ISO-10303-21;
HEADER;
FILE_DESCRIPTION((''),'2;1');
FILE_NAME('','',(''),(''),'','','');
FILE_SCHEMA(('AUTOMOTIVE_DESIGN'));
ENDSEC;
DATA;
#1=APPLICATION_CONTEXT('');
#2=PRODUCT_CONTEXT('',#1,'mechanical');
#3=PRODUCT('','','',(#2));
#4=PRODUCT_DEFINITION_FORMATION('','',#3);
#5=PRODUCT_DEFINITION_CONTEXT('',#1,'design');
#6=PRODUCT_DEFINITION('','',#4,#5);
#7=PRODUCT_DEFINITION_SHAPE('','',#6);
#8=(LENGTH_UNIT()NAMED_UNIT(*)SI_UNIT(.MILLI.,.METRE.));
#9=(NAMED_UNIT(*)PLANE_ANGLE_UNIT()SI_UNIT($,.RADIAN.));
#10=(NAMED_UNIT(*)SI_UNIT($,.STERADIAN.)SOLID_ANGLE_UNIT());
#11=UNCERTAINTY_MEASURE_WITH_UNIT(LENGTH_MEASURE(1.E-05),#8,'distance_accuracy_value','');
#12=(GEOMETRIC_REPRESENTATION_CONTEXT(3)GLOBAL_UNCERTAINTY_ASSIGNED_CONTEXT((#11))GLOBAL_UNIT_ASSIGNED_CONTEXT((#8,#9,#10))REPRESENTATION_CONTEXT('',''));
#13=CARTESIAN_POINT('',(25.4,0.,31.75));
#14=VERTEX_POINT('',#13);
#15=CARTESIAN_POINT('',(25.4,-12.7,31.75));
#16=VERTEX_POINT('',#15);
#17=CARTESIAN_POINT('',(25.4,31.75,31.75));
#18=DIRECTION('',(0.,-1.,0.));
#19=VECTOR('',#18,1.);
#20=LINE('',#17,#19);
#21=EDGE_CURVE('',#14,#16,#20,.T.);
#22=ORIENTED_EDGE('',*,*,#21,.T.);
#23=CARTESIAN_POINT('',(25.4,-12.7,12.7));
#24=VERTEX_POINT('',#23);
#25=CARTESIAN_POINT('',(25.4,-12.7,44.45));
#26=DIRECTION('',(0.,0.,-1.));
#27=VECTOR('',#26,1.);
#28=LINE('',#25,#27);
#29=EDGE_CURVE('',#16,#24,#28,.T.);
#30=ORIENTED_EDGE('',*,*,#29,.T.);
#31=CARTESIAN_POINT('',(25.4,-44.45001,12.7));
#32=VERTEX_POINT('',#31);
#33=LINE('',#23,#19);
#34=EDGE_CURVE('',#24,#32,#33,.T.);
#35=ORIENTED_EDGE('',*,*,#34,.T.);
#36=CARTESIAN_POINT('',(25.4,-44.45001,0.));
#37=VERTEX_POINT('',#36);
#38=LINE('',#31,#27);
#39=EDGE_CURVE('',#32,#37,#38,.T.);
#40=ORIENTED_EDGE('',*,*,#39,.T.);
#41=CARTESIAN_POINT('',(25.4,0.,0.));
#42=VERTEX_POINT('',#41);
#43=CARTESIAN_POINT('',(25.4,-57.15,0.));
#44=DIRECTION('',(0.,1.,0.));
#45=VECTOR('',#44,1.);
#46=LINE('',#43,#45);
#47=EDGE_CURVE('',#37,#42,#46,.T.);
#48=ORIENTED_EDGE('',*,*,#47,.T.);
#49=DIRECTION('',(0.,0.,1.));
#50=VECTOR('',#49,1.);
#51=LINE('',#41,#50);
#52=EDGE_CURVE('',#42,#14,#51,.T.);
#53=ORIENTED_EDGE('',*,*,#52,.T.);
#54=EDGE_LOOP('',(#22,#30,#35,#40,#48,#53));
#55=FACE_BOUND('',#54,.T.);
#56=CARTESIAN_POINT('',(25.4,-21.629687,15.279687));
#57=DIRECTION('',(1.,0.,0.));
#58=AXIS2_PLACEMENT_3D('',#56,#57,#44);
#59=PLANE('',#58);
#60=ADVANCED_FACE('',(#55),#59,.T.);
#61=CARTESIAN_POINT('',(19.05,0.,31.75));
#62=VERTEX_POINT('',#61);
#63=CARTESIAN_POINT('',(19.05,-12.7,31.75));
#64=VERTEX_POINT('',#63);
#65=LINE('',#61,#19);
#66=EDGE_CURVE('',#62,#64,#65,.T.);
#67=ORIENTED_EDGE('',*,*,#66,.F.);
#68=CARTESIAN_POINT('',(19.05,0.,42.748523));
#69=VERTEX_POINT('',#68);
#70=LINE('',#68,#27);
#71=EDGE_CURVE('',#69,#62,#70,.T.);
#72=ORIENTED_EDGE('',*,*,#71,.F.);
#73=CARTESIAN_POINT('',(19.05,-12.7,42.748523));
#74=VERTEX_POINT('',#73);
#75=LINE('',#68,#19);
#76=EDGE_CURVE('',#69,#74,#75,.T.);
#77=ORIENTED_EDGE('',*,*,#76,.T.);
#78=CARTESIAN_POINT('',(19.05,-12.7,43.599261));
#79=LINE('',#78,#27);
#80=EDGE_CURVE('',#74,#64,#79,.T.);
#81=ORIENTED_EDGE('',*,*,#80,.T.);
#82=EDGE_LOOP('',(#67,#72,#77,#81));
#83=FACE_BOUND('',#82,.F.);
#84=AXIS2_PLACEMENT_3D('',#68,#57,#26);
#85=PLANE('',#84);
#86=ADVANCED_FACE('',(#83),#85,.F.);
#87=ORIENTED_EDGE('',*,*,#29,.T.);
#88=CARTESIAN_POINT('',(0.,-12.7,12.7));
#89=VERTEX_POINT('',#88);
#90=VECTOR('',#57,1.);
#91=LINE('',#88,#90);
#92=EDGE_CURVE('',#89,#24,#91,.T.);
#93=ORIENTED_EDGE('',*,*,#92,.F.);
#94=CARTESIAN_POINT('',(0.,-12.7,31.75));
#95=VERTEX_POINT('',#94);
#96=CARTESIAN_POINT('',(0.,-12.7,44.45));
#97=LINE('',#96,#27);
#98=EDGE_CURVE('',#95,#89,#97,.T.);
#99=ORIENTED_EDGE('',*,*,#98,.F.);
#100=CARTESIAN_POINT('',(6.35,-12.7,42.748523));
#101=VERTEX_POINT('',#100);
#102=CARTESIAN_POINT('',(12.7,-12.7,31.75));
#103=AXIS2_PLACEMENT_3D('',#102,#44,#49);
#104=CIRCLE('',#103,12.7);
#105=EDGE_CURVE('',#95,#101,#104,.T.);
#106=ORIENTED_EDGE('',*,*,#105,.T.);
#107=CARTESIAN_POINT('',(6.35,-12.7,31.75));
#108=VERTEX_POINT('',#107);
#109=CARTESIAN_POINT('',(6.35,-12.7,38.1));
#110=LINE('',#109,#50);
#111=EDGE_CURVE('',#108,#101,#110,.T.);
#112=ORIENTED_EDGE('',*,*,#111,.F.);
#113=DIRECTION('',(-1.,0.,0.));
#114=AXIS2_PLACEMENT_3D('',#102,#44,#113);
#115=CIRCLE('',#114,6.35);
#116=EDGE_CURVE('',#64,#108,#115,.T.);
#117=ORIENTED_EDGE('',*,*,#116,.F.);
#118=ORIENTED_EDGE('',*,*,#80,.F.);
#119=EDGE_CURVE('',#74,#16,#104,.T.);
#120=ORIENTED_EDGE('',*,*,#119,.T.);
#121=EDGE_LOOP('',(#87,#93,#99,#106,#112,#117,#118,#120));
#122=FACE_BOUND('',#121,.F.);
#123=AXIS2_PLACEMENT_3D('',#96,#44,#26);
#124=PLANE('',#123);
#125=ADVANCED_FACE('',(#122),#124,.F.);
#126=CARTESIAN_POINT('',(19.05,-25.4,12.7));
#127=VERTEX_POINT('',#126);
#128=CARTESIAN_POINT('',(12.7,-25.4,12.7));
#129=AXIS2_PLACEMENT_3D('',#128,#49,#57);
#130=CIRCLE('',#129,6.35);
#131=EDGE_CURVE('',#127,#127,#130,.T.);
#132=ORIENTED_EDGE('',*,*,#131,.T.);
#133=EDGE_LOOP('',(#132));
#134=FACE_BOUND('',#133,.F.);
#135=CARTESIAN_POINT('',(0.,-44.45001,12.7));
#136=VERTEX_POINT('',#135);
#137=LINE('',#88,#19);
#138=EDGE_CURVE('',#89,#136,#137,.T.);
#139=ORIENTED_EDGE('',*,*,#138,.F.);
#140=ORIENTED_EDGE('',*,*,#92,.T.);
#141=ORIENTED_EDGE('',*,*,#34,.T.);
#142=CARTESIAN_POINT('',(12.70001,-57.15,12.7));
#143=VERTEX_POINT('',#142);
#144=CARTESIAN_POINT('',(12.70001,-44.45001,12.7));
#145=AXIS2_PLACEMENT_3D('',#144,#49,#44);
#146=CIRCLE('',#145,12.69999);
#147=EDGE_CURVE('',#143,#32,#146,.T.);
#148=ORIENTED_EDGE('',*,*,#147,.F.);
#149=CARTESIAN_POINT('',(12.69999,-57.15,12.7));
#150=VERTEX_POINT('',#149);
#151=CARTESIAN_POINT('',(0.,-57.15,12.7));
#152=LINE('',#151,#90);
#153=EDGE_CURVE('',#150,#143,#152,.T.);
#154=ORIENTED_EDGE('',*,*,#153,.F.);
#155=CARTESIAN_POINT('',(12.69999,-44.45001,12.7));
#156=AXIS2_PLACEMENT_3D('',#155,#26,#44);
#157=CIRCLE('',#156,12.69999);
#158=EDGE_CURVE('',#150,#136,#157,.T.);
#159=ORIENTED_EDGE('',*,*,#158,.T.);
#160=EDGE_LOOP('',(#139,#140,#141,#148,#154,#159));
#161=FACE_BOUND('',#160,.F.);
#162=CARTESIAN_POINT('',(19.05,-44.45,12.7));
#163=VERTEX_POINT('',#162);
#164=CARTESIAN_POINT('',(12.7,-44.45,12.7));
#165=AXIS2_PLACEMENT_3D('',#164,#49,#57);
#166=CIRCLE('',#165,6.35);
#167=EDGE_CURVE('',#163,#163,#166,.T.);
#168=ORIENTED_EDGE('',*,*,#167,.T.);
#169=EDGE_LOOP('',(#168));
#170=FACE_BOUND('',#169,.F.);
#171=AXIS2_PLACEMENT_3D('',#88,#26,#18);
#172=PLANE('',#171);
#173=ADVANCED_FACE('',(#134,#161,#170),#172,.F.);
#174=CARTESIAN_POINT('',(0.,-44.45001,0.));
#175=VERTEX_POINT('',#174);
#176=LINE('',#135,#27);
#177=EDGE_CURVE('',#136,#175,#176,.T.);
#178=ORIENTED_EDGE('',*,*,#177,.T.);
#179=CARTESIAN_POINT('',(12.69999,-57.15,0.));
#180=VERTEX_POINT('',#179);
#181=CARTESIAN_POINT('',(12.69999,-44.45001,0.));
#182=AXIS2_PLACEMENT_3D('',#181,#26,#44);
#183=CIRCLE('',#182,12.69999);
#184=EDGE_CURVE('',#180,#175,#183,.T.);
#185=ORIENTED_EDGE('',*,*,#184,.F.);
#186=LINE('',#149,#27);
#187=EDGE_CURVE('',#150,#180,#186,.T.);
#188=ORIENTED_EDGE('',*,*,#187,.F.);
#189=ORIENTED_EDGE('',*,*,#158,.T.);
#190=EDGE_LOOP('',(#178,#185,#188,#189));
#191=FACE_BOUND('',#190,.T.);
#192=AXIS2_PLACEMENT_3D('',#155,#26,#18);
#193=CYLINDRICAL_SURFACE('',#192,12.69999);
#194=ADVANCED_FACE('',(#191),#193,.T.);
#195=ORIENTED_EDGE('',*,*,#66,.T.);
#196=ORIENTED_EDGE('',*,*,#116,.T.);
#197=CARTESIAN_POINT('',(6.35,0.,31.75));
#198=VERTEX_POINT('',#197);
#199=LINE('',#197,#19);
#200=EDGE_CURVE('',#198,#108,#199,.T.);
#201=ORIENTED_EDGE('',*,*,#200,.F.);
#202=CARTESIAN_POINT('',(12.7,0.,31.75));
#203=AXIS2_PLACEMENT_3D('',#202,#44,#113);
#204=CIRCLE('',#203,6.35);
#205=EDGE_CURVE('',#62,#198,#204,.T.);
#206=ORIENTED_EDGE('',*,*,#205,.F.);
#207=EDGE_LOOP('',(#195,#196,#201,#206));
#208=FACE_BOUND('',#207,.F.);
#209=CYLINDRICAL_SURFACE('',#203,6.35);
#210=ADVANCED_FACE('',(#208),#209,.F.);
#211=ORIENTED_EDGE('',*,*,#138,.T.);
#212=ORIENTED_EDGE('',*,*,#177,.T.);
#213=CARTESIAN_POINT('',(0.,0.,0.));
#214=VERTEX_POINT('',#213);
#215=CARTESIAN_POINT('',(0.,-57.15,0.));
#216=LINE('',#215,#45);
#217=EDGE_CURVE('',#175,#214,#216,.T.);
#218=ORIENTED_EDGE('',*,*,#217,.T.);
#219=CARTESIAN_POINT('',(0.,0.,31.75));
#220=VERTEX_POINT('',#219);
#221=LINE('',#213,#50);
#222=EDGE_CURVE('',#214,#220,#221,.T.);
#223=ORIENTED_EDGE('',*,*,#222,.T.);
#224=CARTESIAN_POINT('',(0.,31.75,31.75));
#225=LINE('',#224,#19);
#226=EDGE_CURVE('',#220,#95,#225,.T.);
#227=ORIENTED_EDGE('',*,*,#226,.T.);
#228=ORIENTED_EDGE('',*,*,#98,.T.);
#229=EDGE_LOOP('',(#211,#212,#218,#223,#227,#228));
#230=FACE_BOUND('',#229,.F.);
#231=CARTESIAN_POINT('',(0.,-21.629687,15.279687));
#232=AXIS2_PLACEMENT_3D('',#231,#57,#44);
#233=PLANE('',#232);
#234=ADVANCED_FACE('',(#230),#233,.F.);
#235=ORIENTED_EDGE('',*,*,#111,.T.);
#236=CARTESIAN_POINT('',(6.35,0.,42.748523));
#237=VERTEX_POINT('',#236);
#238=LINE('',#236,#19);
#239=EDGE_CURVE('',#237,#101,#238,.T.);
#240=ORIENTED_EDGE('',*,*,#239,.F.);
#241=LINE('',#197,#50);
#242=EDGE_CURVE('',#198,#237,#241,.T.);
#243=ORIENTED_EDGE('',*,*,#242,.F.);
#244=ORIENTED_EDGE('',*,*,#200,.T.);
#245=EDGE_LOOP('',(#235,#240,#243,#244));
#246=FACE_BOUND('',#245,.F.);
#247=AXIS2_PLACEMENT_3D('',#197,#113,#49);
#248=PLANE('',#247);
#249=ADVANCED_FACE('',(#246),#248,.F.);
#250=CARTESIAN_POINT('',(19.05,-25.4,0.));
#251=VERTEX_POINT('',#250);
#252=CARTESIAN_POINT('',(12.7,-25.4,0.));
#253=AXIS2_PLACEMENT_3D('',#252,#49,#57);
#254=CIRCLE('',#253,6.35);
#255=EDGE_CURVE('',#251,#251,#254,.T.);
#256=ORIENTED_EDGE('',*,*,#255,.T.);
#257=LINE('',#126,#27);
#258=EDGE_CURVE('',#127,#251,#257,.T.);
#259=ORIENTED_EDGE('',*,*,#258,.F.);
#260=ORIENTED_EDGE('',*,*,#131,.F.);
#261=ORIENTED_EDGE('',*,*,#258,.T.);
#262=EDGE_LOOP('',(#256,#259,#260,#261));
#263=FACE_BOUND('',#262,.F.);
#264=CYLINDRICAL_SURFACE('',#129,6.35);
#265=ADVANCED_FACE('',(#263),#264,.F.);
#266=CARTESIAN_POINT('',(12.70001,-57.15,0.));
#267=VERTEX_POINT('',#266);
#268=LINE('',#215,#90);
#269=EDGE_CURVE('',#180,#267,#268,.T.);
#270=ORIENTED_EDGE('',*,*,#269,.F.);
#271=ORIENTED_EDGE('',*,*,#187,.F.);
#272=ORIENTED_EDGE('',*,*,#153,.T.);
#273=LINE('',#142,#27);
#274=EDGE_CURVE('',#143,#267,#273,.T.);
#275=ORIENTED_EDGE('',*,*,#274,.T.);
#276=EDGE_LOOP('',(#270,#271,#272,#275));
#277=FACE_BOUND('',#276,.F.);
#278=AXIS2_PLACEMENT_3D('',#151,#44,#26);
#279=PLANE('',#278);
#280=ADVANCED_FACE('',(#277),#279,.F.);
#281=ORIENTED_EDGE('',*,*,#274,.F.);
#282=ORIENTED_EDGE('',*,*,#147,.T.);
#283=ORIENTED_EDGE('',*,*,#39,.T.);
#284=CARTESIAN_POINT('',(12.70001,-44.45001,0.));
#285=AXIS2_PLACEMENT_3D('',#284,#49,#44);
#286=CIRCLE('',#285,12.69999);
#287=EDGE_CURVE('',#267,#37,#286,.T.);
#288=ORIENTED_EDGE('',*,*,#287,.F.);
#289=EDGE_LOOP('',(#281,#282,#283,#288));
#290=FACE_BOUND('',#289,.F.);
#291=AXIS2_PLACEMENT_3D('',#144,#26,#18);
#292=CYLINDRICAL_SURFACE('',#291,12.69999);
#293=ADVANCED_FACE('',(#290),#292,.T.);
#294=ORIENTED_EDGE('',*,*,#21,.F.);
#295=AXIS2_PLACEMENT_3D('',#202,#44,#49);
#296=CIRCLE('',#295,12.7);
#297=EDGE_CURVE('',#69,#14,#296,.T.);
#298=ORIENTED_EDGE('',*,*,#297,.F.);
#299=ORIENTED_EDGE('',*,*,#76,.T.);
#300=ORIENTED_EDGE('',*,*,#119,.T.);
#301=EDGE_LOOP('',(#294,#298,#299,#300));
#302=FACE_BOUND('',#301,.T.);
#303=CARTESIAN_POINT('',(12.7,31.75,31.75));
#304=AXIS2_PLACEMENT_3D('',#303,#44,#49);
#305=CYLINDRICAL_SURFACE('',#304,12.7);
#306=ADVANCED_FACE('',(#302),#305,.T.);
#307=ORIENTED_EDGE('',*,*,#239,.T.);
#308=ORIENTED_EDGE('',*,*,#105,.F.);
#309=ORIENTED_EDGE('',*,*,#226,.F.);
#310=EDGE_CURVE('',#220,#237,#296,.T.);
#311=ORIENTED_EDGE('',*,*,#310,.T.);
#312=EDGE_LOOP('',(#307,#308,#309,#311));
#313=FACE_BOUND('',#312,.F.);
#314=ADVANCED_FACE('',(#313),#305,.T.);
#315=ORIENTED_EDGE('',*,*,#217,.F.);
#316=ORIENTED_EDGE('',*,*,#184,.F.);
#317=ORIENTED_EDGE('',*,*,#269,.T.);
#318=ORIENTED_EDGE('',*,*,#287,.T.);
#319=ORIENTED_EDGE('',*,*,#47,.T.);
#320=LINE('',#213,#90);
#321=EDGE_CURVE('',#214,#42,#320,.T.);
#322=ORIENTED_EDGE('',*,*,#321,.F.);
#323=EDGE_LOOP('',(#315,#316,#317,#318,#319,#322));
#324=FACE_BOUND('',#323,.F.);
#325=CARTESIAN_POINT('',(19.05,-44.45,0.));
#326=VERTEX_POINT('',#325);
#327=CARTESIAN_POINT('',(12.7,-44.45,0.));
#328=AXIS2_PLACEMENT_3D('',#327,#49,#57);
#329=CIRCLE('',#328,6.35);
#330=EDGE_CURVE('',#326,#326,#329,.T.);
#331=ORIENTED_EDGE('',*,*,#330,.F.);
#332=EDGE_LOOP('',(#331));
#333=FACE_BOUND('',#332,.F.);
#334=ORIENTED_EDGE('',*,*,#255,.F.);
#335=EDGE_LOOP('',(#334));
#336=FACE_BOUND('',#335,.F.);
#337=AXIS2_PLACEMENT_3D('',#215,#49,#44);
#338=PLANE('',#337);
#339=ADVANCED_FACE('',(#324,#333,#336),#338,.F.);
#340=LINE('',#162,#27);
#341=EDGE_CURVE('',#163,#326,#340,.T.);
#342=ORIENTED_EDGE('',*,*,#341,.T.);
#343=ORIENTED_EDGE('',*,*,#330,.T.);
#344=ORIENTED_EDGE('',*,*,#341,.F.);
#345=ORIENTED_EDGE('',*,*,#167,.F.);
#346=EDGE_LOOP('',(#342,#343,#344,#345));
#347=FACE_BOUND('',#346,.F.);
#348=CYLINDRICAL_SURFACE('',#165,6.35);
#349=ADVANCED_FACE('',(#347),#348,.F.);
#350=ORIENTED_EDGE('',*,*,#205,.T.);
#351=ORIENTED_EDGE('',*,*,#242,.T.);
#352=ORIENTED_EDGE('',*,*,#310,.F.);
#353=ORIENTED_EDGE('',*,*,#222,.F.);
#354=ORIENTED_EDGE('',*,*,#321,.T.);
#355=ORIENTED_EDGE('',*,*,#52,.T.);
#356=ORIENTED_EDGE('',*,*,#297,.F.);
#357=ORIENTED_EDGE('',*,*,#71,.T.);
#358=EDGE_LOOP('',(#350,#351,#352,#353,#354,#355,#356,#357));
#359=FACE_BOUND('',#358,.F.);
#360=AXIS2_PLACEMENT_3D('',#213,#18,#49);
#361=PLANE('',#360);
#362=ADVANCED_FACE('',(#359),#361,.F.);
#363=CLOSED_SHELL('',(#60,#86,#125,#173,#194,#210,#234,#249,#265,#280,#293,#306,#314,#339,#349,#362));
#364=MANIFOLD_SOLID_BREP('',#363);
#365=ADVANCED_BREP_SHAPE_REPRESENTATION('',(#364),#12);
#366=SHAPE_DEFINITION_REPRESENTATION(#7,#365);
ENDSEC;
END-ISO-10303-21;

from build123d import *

# Parameters (mm, degrees)
F1_DEPTH    = 25.4
F2_T1_DEPTH = 76.2
F3_R        = 12.69999
F6_DEPTH    = 25.4
F4_R        = 6.35
F7_DEPTH    = 25.4


# Not quite as in the source:
# - a fillet or chamfer that OpenCascade refuses, or shapes differently, is made with other operations: its cross-section is extruded or revolved along the edge and cut away or added
# - a fillet or chamfer is up to 0.001 mm smaller than in the source, because OpenCascade refuses the exact size


with BuildPart() as f1:
    # F0 (on Right) → F1 (new body)
    with BuildSketch(Plane.YZ):
        Polygon((-57.15, 0), (0, 0), (0, 44.45), (-12.7, 44.45), (-12.7, 12.7), (-57.15, 12.7), align=None)
    extrude(amount=F1_DEPTH)

    # F2: fillet of radius 12.7 on 2 edges, made by hand

    # F2_s2 → F2_t1 (cut)
    with BuildSketch(Plane.XZ.offset(-31.75)):
        with BuildLine():
            ThreePointArc((12.7, 44.45), (3.7197438789, 40.7302561211), (0, 31.75))
            Line((0, 31.75), (0, 44.45))
            Line((0, 44.45), (12.7, 44.45))
        make_face()
        with BuildLine():
            ThreePointArc((12.7, 44.45), (21.6802561211, 40.7302561211), (25.4, 31.75))
            Line((25.4, 31.75), (25.4, 44.45))
            Line((25.4, 44.45), (12.7, 44.45))
        make_face()
    extrude(amount=F2_T1_DEPTH, mode=Mode.SUBTRACT)

    # F3 (radius 12.7 in the source; OpenCascade refuses exactly that, so slightly less here)
    f3_edges = [f1.edges().sort_by_distance(p)[0] for p in [
        (25.4, -57.15, 6.35),
        (0, -57.15, 6.35),
    ]]
    fillet(f3_edges, radius=F3_R)

    # F5 (on face) → F6 (cut)
    with BuildSketch(Plane(origin=(0, 0, 0), x_dir=(-1, 0, 0), z_dir=(0, 1, 0))):
        with BuildLine():
            ThreePointArc((-19.05, 31.75), (-12.7, 25.4), (-6.35, 31.75))
            ThreePointArc((-6.35, 31.75), (-12.7, 38.1), (-19.05, 31.75))
        make_face()
        with BuildLine():
            ThreePointArc((-19.05, 31.75), (-12.7, 38.1), (-6.35, 31.75))
            Line((-6.35, 31.75), (-6.35, 42.7485226281))
            ThreePointArc((-6.35, 42.7485226281), (-9.4129981272, 44.0172579939), (-12.7, 44.45))
            ThreePointArc((-12.7, 44.45), (-15.9870018728, 44.0172579939), (-19.05, 42.7485226281))
            Line((-19.05, 42.7485226281), (-19.05, 31.75))
        make_face()
    extrude(amount=-F6_DEPTH, mode=Mode.SUBTRACT)

    # F4 (on face) → F7 (cut)
    with BuildSketch(Plane.XY.offset(12.7)):
        with Locations((12.7, -44.45)):
            Circle(F4_R)
        with Locations((12.7, -25.4)):
            Circle(F4_R)
    extrude(amount=-F7_DEPTH, mode=Mode.SUBTRACT)


solid = f1.part
